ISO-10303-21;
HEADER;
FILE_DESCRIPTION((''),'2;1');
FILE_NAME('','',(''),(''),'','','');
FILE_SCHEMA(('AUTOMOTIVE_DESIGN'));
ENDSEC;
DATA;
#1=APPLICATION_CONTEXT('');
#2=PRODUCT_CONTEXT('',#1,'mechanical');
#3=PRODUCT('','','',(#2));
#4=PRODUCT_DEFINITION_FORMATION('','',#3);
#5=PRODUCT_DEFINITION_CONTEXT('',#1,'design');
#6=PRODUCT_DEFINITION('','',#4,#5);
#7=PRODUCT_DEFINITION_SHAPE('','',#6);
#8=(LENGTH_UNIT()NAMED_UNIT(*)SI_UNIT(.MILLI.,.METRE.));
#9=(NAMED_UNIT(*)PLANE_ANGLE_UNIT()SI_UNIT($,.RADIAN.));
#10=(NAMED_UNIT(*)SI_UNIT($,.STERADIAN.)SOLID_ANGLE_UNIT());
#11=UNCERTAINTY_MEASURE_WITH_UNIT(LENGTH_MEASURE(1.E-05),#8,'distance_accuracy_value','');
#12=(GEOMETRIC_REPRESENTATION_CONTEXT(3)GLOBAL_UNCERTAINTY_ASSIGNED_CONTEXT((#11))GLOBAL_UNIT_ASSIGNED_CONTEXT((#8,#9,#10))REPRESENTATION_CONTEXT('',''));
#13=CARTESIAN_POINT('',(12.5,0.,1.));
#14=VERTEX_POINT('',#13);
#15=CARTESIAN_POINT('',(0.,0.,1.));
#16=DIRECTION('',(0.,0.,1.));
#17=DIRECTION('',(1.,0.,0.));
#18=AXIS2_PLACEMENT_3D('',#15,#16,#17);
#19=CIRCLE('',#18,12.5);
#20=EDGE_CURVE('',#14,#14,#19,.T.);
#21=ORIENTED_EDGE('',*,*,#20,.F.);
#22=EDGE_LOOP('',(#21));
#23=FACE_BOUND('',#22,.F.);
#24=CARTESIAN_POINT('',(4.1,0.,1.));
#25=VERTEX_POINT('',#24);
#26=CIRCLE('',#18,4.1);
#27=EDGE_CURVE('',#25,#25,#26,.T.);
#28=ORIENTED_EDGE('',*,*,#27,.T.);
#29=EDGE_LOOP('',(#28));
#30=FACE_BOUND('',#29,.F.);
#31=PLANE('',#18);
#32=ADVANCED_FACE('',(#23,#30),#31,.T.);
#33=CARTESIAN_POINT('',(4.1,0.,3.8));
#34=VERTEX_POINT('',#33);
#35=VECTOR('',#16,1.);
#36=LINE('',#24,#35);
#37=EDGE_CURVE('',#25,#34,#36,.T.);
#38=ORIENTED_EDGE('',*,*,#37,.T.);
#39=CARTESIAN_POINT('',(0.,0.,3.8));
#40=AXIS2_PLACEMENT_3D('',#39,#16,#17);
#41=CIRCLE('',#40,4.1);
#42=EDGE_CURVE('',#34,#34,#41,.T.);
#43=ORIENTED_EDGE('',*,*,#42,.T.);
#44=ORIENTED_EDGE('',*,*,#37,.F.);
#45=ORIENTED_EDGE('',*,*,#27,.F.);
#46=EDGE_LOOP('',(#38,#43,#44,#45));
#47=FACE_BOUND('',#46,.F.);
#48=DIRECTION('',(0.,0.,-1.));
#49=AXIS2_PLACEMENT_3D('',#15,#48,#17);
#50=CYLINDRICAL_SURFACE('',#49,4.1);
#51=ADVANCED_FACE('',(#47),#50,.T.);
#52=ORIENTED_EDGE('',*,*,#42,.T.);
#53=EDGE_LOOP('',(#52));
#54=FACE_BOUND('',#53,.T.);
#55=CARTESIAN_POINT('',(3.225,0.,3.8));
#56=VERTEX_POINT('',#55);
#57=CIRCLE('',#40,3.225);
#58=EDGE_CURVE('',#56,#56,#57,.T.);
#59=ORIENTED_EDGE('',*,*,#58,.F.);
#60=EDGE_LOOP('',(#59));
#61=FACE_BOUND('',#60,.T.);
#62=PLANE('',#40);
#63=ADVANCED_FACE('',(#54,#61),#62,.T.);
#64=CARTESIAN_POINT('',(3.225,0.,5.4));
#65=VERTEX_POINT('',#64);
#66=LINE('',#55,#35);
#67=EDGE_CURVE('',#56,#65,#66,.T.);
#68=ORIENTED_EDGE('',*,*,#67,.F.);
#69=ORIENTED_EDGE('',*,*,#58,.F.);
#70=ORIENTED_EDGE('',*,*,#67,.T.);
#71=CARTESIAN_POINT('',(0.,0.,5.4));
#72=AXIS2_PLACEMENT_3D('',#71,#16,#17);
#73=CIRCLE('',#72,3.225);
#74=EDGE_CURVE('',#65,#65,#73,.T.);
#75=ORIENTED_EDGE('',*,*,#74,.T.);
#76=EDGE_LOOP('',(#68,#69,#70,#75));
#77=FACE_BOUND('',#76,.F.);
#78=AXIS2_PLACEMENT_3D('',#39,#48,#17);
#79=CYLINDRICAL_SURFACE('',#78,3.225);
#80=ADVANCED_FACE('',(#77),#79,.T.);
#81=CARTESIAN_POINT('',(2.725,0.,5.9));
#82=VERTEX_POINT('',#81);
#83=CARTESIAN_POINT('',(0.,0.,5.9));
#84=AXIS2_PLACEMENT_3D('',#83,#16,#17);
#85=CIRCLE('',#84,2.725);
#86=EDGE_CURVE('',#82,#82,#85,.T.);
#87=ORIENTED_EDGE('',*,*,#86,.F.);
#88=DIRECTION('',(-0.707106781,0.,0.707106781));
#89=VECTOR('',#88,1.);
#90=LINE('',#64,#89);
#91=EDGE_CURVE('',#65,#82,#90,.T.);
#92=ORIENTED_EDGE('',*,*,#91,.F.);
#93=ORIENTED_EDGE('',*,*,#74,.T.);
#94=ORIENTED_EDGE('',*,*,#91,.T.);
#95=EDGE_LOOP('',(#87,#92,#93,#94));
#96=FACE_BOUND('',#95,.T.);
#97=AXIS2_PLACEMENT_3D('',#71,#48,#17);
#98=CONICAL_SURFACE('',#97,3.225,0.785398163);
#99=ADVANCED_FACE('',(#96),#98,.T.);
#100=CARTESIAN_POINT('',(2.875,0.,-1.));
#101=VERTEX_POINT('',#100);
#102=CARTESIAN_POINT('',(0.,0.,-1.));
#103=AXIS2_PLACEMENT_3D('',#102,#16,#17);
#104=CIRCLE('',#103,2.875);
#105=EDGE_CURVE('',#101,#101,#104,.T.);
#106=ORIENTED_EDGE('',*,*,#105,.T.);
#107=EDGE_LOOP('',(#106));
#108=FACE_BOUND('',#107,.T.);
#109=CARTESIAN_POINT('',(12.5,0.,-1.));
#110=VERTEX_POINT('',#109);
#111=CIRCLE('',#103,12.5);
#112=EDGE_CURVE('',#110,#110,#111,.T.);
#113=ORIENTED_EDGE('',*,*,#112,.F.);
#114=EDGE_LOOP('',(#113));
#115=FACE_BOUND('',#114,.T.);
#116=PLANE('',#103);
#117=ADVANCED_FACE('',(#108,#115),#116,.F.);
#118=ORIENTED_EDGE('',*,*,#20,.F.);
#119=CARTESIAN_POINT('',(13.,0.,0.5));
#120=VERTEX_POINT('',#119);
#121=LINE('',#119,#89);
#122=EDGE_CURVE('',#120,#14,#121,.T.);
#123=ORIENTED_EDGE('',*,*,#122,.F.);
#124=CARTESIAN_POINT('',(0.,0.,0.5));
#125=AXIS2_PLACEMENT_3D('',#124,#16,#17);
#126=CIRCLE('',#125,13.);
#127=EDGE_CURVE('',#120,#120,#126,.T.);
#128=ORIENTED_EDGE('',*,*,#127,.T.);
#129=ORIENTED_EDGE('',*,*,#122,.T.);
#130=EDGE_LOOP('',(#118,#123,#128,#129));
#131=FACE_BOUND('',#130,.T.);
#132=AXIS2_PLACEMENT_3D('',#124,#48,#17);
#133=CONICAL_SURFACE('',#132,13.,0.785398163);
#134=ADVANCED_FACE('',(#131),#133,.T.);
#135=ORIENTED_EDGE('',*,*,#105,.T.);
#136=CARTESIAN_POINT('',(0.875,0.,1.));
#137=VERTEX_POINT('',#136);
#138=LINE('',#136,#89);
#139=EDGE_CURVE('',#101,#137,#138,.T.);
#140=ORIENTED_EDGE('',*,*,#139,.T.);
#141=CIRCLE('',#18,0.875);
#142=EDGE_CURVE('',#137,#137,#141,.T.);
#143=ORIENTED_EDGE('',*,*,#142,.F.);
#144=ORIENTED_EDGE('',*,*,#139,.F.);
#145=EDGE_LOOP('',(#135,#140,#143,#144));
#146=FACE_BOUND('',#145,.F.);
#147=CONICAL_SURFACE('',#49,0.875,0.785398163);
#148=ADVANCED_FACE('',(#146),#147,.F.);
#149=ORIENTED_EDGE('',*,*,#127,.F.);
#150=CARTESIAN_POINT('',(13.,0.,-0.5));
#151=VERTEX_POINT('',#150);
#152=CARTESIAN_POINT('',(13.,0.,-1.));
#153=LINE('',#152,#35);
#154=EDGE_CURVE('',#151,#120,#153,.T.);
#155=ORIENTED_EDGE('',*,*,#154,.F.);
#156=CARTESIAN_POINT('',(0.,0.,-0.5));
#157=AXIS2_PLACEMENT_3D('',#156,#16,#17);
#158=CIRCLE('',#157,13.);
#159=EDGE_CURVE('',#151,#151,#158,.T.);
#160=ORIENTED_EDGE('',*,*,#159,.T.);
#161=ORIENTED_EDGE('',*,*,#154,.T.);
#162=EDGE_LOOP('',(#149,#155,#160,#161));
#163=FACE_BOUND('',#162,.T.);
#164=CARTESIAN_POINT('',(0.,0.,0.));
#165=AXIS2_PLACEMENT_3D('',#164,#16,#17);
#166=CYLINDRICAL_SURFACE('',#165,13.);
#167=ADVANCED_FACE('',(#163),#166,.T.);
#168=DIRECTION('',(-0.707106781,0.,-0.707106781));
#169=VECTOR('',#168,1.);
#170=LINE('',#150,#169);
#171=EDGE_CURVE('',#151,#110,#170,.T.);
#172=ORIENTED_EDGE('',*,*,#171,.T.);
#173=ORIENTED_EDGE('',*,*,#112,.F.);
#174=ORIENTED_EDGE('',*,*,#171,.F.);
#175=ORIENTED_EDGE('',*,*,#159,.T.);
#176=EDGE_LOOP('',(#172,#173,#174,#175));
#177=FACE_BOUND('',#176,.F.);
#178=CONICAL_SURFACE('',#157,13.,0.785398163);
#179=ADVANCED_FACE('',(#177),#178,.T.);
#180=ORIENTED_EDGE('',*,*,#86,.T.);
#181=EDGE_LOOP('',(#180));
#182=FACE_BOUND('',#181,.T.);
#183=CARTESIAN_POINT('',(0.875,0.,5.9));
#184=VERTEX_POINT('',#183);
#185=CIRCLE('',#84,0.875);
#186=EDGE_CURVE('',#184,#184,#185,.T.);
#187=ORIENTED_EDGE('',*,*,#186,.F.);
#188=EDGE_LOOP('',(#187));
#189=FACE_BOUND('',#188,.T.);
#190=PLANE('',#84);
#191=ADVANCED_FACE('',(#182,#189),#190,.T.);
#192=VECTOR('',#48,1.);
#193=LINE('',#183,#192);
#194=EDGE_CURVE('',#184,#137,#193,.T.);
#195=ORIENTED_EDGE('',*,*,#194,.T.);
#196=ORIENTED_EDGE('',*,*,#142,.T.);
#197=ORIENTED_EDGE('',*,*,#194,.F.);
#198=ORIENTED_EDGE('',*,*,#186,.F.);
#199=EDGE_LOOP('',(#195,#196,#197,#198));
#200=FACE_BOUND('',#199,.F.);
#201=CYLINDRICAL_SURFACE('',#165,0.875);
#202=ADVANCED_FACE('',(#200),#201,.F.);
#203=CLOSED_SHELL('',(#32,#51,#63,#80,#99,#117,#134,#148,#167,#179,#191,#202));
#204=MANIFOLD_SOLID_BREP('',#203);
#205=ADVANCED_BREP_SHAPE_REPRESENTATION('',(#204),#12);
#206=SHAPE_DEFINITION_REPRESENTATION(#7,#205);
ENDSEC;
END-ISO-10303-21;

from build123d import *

# Parameters (mm, degrees)
F0_W     = 13
F0_H     = 1
F2_R     = 4.1
F3_DEPTH = 2.8
F4_R     = 3.225
F5_DEPTH = 2.1
F6_R     = 0.875
F7_DEPTH = 5.901
F8_DEPTH = 1
F9_SIZE  = 0.5
F10_SIZE = 2


with BuildPart() as f1:
    # F0 (on Front) → F1 (revolve)
    with BuildSketch(Plane.XZ):
        with Locations((6.5, 0.5)):
            Rectangle(F0_W, F0_H)
    revolve(axis=Axis((0, 0, 1.7087265151), (0, 0, 1)))

    # F2 (on face) → F3 (join)
    with BuildSketch(Plane.XY.offset(1)):
        Circle(F2_R)
    extrude(amount=F3_DEPTH)

    # F4 (on face) → F5 (join)
    with BuildSketch(Plane.XY.offset(3.8)):
        Circle(F4_R)
    extrude(amount=F5_DEPTH)

    # F6 (on face) → F7 (cut, through all)
    with BuildSketch(Plane.XY.offset(5.9)):
        Circle(F6_R)
    extrude(amount=-F7_DEPTH, mode=Mode.SUBTRACT)

    # F8 (add): a face of the model
    f8_faces = [f1.faces().sort_by_distance(p)[0] for p in [
        (-12.6323044738, 0, 0),
    ]]
    extrude(f8_faces, amount=F8_DEPTH)

    # F9
    f9_edges = [f1.edges().sort_by_distance(p)[0] for p in [
        (-13, 0, -1),
        (-13, 0, 1),
        (-3.225, 0, 5.9),
    ]]
    chamfer(f9_edges, length=F9_SIZE)

    # F10
    f10_edges = [f1.edges().sort_by_distance(p)[0] for p in [
        (-0.875, 0, -1),
    ]]
    chamfer(f10_edges, length=F10_SIZE)


solid = f1.part
